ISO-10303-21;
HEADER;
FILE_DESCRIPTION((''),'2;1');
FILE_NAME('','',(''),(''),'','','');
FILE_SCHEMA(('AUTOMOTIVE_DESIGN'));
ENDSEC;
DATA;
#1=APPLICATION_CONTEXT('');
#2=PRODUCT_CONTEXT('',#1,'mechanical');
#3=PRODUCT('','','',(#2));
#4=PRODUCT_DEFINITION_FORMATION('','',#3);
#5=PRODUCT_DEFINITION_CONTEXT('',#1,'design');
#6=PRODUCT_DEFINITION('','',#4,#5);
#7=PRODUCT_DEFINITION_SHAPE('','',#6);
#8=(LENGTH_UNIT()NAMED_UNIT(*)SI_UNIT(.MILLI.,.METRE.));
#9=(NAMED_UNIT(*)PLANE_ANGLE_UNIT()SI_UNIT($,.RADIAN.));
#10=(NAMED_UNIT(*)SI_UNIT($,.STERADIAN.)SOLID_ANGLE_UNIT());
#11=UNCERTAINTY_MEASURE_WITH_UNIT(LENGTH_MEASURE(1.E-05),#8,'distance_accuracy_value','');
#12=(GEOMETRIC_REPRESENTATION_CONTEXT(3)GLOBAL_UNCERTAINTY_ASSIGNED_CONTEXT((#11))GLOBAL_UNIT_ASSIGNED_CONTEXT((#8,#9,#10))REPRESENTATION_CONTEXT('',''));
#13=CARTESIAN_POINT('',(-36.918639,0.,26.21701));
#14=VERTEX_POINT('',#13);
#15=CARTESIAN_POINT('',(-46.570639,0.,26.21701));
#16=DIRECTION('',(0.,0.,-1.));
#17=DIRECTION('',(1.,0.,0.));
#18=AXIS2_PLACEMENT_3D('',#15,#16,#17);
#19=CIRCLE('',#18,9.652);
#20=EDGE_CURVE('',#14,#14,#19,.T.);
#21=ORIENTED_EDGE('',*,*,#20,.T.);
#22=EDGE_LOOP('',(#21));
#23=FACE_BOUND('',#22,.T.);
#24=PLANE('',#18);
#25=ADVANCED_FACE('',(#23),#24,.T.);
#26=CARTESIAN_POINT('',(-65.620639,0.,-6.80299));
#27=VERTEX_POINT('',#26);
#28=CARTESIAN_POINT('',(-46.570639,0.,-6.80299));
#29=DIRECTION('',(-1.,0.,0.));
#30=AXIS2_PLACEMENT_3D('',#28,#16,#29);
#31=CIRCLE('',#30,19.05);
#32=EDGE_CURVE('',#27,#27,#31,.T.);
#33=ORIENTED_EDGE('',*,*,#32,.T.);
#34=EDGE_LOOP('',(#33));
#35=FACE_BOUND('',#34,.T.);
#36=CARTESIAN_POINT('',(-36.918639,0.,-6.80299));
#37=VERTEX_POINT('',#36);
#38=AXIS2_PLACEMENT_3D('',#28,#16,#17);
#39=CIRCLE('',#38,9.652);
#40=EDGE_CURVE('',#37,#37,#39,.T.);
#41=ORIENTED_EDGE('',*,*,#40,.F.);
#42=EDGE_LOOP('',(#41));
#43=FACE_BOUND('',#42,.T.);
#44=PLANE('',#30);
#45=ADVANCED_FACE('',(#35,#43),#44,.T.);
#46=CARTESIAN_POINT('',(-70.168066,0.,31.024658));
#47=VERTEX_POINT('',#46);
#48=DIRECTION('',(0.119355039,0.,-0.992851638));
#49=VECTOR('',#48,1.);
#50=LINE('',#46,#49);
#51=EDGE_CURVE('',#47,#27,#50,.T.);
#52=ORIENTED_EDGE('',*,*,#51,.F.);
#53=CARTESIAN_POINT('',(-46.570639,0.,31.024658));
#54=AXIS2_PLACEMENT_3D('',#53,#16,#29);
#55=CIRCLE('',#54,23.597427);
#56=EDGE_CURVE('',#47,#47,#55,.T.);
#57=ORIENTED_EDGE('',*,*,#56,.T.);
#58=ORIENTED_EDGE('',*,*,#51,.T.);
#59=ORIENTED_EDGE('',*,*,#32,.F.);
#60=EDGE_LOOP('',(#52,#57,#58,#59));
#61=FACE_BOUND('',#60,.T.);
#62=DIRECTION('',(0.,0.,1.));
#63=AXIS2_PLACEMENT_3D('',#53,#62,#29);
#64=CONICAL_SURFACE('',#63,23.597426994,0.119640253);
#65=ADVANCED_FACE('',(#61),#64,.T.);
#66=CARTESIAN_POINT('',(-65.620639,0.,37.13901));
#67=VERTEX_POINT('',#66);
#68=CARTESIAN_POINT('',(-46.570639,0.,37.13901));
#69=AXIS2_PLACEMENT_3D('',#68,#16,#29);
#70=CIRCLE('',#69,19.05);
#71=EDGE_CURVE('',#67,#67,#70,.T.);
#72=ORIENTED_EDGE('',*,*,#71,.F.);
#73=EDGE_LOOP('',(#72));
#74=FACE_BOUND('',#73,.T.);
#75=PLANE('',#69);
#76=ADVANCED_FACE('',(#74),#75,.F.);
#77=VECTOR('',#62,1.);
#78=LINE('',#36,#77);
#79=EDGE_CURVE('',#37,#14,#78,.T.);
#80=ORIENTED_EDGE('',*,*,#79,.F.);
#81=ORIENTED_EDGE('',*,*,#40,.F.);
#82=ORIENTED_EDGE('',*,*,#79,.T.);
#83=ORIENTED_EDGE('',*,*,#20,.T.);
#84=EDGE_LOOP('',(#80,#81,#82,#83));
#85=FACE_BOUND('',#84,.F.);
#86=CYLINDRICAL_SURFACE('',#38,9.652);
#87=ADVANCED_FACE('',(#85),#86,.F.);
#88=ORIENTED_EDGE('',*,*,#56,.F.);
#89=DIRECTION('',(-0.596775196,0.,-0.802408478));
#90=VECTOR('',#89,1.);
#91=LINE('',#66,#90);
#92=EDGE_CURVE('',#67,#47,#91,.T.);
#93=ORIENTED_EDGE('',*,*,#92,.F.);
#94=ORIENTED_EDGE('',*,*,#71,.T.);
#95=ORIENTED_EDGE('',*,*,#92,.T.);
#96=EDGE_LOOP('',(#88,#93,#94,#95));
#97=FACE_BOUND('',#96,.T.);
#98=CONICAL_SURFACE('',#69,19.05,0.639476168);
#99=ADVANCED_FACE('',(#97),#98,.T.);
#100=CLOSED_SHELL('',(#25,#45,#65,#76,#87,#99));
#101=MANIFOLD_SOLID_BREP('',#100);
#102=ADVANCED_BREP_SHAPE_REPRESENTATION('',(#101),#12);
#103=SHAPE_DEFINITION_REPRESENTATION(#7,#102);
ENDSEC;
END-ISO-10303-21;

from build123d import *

# Parameters (mm, degrees)
F2_R     = 9.652
F3_DEPTH = 33.02


# Not quite as in the source:
# - a feature names something its author has since deleted; it is built from what else it names


with BuildPart() as f1:
    # F0 (on Front) → F1 (revolve)
    with BuildSketch(Plane.XZ):
        Polygon((-70.1680659715, 31.024657777), (-65.6206389772, -6.8029896218), (-46.5706389772, -6.8029896218), (-46.5706389772, 37.1390103782), (-65.6206389772, 37.1390103782), align=None)
    revolve(axis=Axis((-46.5706389772, 0, 15.1680103782), (0, 0, -1)))

    # F2 (on face) → F3 (cut)
    with BuildSketch(Plane(origin=(0, 0, -6.8029896218), x_dir=(1, 0, 0), z_dir=(0, 0, -1))):
        with Locations((-46.5706389772, 0)):
            Circle(F2_R)
    extrude(amount=-F3_DEPTH, mode=Mode.SUBTRACT)


solid = f1.part
